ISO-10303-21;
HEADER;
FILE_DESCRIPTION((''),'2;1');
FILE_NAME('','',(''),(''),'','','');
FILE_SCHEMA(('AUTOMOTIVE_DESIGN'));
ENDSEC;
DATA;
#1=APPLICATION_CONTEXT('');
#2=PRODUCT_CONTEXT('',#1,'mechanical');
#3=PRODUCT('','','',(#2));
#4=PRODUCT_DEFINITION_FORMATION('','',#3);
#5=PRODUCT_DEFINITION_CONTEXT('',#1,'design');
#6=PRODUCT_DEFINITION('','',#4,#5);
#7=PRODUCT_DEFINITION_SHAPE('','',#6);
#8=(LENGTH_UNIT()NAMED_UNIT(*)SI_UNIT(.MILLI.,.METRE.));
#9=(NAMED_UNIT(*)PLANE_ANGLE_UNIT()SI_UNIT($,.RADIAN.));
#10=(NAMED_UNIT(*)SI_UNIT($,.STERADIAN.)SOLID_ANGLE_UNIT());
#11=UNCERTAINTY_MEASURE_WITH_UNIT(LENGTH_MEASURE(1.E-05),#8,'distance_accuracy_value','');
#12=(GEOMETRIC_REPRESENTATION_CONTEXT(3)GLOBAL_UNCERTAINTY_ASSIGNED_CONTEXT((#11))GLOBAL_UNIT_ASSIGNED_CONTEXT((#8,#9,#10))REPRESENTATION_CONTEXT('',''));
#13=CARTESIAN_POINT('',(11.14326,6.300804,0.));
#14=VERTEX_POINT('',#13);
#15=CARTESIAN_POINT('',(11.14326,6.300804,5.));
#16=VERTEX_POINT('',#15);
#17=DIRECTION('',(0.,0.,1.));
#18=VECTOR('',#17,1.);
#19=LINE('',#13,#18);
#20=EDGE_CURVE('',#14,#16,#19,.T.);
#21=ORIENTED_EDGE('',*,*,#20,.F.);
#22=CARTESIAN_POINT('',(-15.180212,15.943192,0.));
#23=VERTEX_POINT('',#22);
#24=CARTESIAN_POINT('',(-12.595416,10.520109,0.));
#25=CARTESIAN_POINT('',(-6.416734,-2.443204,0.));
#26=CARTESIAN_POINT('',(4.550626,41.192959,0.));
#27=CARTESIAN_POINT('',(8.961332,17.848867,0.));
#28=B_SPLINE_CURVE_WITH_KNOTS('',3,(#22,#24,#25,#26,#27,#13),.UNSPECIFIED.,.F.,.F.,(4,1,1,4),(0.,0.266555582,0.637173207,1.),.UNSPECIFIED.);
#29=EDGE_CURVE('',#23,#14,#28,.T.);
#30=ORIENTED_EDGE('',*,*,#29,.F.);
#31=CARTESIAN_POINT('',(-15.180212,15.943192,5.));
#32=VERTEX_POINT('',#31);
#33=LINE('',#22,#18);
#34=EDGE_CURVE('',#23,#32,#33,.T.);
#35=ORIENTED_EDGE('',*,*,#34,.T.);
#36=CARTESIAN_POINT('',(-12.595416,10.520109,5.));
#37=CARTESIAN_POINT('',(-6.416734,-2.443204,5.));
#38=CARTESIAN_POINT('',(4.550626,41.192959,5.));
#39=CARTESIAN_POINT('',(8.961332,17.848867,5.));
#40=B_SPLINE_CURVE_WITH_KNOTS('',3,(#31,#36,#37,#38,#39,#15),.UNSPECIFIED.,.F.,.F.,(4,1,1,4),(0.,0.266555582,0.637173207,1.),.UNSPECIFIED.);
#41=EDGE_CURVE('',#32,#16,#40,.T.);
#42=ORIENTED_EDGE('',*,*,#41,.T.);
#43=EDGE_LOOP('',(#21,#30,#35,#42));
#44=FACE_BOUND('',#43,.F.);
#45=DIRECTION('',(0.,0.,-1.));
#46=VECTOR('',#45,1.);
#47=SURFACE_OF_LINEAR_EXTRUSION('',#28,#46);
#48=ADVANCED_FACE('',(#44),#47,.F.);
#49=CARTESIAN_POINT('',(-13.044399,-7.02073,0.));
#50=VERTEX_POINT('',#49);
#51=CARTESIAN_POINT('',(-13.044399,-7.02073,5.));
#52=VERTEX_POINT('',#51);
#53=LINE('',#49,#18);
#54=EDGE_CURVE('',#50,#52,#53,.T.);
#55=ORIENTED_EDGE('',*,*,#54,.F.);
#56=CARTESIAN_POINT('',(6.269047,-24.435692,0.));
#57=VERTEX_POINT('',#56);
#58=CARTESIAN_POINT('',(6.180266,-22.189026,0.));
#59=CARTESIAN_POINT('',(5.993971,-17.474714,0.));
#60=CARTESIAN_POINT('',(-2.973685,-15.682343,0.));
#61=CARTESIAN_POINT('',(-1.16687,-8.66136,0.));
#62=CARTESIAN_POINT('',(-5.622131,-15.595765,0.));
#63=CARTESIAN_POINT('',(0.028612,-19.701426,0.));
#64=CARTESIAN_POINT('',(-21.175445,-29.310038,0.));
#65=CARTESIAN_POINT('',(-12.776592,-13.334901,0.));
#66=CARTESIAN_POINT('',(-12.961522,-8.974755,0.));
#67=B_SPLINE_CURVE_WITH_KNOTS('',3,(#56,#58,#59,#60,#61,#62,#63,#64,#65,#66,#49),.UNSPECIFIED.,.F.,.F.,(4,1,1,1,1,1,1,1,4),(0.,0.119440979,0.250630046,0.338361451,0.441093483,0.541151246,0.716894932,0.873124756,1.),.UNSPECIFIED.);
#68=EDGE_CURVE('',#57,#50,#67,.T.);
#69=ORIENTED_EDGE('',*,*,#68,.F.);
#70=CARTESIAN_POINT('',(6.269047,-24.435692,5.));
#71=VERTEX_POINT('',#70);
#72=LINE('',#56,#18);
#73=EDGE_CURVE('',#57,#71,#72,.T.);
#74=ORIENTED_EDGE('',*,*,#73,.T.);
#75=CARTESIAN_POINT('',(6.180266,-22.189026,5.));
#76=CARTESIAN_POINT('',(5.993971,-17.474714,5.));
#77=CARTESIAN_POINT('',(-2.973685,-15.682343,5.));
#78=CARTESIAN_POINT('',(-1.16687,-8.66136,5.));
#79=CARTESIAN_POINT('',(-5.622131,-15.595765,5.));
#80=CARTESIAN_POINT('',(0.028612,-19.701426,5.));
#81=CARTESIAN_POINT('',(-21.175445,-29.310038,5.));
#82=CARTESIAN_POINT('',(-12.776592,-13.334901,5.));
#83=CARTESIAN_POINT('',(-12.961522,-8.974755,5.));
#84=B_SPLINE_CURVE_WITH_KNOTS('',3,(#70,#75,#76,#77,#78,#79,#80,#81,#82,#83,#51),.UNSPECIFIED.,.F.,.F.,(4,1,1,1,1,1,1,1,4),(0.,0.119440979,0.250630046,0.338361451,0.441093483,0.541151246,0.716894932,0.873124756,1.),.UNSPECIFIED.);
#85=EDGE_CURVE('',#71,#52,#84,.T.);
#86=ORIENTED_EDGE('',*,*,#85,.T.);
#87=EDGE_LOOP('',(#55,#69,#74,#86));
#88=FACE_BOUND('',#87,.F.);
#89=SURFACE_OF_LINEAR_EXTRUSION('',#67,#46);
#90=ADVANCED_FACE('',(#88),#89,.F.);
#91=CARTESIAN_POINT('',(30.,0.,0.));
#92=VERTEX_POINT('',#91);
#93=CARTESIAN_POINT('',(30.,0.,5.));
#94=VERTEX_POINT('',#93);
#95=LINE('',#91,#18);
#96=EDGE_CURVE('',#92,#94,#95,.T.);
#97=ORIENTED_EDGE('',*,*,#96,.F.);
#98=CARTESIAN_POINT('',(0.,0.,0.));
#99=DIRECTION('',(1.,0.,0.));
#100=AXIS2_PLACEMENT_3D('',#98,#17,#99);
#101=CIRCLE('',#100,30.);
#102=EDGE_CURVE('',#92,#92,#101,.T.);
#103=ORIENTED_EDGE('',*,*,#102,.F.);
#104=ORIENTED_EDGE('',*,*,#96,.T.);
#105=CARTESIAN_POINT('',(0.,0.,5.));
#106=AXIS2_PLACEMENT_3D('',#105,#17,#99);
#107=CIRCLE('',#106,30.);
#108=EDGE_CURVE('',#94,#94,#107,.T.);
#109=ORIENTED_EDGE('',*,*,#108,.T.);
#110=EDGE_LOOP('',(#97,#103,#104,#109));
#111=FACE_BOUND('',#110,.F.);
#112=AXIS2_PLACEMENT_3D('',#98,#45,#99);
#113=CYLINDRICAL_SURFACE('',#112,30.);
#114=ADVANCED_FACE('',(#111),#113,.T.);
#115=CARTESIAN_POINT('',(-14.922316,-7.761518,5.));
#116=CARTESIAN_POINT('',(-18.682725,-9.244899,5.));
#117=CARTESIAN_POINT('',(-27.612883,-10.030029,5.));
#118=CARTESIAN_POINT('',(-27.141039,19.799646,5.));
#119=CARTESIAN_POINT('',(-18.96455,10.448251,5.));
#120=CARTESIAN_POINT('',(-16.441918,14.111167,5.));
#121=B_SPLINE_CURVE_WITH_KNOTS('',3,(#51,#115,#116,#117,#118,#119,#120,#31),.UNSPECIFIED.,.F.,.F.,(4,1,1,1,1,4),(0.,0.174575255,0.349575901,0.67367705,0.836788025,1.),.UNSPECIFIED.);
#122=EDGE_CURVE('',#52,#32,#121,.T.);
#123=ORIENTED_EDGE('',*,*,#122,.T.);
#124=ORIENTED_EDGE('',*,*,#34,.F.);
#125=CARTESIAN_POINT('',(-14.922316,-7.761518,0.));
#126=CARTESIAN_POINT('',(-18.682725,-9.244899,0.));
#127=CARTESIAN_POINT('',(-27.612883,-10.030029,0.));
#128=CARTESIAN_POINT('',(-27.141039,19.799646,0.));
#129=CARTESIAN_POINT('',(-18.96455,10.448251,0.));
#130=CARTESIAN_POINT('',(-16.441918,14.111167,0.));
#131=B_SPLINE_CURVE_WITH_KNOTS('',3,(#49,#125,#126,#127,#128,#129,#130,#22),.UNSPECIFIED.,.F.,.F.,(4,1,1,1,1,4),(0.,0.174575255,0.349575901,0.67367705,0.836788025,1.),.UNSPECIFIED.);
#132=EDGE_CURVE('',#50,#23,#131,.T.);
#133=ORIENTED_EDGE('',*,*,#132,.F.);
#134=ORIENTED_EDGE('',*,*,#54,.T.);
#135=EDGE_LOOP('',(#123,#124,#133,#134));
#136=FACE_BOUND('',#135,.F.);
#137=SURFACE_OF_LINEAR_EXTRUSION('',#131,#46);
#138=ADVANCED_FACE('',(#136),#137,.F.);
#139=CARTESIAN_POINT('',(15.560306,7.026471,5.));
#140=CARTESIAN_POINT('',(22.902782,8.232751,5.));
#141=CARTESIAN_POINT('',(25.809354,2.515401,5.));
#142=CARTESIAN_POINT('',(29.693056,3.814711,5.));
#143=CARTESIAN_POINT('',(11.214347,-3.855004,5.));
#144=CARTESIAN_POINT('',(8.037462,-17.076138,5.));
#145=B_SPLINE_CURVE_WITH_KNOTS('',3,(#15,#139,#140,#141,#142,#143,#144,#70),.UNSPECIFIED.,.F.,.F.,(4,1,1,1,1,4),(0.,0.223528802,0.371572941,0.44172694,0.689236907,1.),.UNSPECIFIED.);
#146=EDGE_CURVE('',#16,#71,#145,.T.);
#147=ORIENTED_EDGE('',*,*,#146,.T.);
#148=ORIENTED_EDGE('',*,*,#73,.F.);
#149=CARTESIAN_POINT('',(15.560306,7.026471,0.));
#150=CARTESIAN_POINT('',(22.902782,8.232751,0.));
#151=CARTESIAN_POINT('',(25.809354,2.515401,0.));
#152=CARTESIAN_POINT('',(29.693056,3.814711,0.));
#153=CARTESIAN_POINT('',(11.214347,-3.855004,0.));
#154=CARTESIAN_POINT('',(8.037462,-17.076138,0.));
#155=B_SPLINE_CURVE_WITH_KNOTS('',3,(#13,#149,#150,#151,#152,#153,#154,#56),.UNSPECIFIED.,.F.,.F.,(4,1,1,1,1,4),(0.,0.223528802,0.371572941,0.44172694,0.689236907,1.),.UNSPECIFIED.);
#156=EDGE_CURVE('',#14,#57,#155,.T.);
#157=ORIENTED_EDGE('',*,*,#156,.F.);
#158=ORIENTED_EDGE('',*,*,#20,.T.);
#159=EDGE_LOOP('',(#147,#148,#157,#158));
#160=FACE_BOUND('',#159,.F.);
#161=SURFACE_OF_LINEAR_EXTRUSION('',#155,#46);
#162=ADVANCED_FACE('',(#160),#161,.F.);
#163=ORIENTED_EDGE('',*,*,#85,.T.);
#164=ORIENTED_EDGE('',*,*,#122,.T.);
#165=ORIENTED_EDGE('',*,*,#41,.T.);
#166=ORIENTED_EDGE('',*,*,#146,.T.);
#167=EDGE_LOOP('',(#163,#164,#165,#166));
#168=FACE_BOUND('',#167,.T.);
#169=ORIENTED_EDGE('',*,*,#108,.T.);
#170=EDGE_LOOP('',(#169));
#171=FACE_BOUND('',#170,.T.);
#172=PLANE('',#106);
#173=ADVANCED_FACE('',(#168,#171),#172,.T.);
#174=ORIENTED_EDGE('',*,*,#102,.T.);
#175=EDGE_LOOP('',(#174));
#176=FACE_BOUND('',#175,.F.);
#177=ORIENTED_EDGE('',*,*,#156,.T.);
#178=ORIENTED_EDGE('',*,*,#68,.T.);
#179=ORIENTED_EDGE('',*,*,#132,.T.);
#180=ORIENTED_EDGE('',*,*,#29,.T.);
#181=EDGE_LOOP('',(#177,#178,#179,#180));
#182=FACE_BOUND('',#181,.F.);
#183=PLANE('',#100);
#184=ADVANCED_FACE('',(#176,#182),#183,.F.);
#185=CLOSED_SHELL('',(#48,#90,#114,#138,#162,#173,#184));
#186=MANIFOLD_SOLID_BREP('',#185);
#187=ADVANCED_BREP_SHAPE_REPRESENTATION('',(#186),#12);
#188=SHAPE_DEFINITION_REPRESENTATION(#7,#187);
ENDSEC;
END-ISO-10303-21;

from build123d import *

# Parameters (mm, degrees)
F0_R     = 30
F1_DEPTH = 5


with BuildPart() as f1:
    # F0 (on Top) → F1 (new body)
    with BuildSketch(Plane.XY):
        Circle(F0_R)
        with BuildLine():
            add(Edge.make_bspline(
                [(11.1432595722, 6.3008036782), (15.5603060299, 7.0264709669), (22.9027823898, 8.2327509921), (25.8093539427, 2.5154011348), (29.6930561957, 3.8147112425), (11.2143468613, -3.8550044175), (8.0374621525, -17.0761381246), (6.2690470368, -24.4356915355)],
                knots=[0, 0, 0, 0, 0.2235288018, 0.3715729411, 0.4417269404, 0.6892369073, 1, 1, 1, 1], degree=3))
            add(Edge.make_bspline(
                [(6.2690470368, -24.4356915355), (6.1802657102, -22.1890257282), (5.9939706197, -17.4747144391), (-2.9736854852, -15.6823425273), (-1.1668697629, -8.6613601918), (-5.6221313444, -15.5957649297), (0.0286124979, -19.7014263791), (-21.1754449377, -29.3100378916), (-12.7765919914, -13.3349010401), (-12.9615218, -8.9747552381), (-13.0443992093, -7.0207295939)],
                knots=[0, 0, 0, 0, 0.1194409785, 0.2506300455, 0.3383614514, 0.4410934831, 0.5411512464, 0.7168949323, 0.8731247561, 1, 1, 1, 1], degree=3))
            add(Edge.make_bspline(
                [(-13.0443992093, -7.0207295939), (-14.9223158973, -7.761517675), (-18.6827252253, -9.2448989283), (-27.6128834737, -10.0300292339), (-27.1410394083, 19.7996455511), (-18.9645499436, 10.4482508336), (-16.4419179131, 14.1111670113), (-15.1802115142, 15.9431919456)],
                knots=[0, 0, 0, 0, 0.174575255, 0.3495759006, 0.6736770496, 0.8367880255, 1, 1, 1, 1], degree=3))
            add(Edge.make_bspline(
                [(-15.1802115142, 15.9431919456), (-12.5954163122, 10.5201087382), (-6.4167340587, -2.4432037696), (4.5506258251, 41.1929594406), (8.9613322001, 17.8488666607), (11.1432595722, 6.3008036782)],
                knots=[0, 0, 0, 0, 0.2665555825, 0.6371732066, 1, 1, 1, 1], degree=3))
        make_face(mode=Mode.SUBTRACT)
    extrude(amount=F1_DEPTH)


solid = f1.part
